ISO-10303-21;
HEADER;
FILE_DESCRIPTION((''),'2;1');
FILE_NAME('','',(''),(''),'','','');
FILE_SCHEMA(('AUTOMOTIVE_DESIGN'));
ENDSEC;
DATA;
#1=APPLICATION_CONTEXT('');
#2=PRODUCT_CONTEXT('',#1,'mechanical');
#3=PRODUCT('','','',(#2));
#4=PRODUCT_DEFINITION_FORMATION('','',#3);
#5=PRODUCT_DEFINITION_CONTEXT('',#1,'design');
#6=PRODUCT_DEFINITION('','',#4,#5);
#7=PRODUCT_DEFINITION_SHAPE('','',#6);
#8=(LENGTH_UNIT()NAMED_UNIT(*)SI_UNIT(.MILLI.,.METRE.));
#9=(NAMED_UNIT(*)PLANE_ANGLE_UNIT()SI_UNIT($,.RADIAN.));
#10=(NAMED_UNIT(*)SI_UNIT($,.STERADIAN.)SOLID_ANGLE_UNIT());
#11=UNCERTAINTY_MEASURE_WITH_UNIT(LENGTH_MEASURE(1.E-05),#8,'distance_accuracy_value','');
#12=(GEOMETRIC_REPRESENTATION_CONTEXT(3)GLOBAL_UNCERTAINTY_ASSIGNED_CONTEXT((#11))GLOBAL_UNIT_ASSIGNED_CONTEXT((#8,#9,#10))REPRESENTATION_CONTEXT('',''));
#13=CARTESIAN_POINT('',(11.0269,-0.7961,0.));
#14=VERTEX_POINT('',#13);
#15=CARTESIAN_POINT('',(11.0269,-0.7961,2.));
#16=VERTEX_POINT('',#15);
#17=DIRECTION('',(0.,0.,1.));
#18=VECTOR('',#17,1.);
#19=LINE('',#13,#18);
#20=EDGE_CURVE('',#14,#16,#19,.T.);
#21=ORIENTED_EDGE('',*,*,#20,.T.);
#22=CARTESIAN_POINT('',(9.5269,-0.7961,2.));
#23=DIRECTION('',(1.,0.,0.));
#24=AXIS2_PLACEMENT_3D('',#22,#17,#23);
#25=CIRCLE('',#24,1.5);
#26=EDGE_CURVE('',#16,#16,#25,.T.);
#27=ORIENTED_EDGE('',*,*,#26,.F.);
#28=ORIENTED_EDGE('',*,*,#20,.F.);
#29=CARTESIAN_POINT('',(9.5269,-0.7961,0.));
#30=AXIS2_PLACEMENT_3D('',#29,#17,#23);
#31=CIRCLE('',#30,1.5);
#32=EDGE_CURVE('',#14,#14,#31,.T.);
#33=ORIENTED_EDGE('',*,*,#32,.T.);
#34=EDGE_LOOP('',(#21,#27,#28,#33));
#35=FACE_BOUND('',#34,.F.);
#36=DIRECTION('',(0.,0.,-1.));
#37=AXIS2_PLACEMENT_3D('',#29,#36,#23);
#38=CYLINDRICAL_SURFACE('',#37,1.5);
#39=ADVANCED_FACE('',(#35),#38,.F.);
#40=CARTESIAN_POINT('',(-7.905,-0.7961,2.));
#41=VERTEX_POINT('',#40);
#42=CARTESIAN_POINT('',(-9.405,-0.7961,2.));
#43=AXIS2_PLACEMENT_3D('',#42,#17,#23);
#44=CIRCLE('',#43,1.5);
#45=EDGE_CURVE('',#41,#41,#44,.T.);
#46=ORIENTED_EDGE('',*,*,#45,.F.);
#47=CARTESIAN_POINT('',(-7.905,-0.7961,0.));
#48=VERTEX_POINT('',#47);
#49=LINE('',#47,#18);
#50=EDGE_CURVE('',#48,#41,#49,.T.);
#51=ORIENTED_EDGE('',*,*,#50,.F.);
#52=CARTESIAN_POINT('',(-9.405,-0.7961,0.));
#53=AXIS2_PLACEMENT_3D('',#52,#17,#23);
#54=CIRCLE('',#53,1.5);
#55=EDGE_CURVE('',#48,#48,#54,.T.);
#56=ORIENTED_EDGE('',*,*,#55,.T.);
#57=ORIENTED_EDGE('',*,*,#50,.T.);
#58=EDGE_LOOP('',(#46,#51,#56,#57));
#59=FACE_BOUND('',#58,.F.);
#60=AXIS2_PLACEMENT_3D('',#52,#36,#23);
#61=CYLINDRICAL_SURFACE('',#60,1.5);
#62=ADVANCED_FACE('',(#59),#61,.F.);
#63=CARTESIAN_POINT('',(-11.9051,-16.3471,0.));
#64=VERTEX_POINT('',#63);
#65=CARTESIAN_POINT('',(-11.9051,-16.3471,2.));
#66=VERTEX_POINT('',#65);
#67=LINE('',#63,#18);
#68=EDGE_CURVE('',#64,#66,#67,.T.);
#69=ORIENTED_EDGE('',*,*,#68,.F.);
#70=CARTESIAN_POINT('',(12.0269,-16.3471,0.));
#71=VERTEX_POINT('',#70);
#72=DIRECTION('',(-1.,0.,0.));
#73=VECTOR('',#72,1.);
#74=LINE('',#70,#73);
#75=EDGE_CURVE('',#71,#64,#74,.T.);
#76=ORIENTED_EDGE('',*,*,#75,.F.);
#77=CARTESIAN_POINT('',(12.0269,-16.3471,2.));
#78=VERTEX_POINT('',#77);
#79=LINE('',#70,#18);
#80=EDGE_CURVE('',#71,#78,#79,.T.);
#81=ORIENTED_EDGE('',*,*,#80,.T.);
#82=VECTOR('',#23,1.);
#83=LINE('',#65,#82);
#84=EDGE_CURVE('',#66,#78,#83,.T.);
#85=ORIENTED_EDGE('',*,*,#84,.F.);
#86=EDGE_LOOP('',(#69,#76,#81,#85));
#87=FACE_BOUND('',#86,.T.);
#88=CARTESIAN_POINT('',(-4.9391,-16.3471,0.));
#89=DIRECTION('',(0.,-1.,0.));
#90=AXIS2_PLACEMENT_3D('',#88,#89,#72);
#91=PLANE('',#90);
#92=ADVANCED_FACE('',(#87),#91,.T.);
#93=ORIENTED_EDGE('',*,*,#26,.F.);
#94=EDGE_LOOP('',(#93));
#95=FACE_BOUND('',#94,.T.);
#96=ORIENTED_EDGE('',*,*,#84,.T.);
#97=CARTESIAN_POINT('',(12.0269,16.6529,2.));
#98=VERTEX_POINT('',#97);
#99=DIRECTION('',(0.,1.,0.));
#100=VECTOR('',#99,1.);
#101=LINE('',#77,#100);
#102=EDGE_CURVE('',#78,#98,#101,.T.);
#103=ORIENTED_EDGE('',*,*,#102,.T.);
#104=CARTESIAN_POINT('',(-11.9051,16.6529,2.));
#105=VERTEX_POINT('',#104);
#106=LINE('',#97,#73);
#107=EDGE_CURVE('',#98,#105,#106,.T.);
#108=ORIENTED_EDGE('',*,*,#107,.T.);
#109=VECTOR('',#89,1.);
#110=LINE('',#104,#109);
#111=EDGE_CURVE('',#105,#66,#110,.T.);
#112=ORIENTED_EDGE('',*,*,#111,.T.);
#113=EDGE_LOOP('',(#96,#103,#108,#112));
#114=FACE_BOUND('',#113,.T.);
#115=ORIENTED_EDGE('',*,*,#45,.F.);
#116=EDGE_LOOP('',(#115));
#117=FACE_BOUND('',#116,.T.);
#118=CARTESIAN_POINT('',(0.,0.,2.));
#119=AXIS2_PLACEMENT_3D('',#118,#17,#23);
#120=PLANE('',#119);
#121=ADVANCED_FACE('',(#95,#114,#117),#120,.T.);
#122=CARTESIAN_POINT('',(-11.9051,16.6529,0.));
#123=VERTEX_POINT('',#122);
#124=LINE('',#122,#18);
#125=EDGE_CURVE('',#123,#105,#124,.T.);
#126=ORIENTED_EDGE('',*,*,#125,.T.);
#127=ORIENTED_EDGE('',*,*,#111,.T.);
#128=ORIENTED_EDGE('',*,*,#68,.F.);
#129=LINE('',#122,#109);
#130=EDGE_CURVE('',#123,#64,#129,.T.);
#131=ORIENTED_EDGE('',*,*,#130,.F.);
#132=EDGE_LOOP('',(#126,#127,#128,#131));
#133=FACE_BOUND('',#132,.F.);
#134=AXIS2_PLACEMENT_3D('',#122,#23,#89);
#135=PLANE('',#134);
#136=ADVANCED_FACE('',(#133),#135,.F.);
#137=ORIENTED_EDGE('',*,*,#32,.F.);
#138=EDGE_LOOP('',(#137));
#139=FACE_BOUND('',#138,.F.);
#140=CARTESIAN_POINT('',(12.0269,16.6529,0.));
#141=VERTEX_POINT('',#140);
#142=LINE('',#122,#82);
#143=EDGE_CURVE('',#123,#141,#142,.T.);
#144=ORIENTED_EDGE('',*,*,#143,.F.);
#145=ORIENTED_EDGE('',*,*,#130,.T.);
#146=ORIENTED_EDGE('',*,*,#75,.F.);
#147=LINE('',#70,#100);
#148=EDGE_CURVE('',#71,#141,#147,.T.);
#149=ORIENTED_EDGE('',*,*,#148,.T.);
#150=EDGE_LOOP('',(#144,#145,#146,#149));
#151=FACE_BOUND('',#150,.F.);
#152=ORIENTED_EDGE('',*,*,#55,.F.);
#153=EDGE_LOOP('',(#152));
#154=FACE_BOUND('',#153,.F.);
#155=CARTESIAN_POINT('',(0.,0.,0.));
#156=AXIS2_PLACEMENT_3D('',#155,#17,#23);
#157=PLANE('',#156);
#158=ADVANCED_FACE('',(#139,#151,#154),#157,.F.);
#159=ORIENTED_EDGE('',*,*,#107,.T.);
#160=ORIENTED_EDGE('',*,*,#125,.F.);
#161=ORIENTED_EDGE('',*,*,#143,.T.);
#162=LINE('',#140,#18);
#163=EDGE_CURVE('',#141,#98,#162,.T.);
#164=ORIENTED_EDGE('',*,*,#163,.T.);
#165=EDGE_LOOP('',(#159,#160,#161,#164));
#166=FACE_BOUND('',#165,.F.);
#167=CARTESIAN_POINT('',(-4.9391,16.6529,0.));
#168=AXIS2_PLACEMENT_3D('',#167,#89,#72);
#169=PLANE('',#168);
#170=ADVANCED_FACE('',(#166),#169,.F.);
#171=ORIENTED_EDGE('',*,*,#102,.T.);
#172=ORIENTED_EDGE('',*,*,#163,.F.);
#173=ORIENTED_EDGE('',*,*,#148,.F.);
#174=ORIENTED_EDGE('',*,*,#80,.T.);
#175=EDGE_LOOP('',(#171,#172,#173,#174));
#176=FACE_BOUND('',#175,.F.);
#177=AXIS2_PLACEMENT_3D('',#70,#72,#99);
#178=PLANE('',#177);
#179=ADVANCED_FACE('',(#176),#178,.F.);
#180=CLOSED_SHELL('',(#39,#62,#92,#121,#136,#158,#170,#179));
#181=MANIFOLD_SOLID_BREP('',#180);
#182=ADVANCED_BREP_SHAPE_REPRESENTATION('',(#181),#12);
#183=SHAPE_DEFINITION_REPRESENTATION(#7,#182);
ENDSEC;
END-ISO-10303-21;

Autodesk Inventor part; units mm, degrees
ref_plane "YZ Plane" through (0, 0, 0) normal (1, 0, 0) x (0, 1, 0)
ref_plane "XZ Plane" through (0, 0, 0) normal (0, 1, 0) x (-1, 0, 0)
ref_plane "XY Plane" through (0, 0, 0) normal (0, 0, 1) x (1, 0, 0)
sketch "草图1" plane through (0, 0, 0) normal (0, 0, 1) x (1, 0, 0)
  circle A0 centre (-9.405, -0.7961) radius 2 projected
  line L0 (-4.9391, -16.3471) -> (-4.9391, -13.3471) projected
  line L1 (-4.9391, -13.3471) -> (-6.4391, -13.3471) projected
  line L2 (-6.4391, -13.3471) -> (-6.4391, 13.6529) projected
  line L3 (-4.9391, 13.6529) -> (-6.4391, 13.6529) projected
  line L4 (-4.9391, 16.6529) -> (-4.9391, 13.6529) projected
  line L5 (-4.9391, 16.6529) -> (-11.9051, 16.6529) projected
  line L6 (-11.9051, 16.6529) -> (-11.9051, -16.3471) projected
  line L7 (-4.9391, -16.3471) -> (-11.9051, -16.3471) projected
  circle A1 centre (9.5269, -0.7961) radius 2 projected
  line L8 (5.0609, -16.3471) -> (12.0269, -16.3471) projected
  line L9 (12.0269, -16.3471) -> (12.0269, 16.6529) projected
  line L10 (5.0609, 16.6529) -> (12.0269, 16.6529) projected
  line L11 (5.0609, 16.6529) -> (5.0609, 13.6529) projected
  line L12 (6.5609, 13.6529) -> (5.0609, 13.6529) projected
  line L13 (6.5609, -13.3471) -> (6.5609, 13.6529) projected
  line L14 (6.5609, -13.3471) -> (5.0609, -13.3471) projected
  line L15 (5.0609, -13.3471) -> (5.0609, -16.3471) projected
  line L16 (12.0269, -16.3471) -> (-11.9051, -16.3471)
  line L17 (-11.9051, -16.3471) -> (-11.9051, 16.6529)
  line L18 (-11.9051, 16.6529) -> (12.0269, 16.6529)
  line L19 (12.0269, 16.6529) -> (12.0269, -16.3471)
  circle A2 centre (9.5269, -0.7961) radius 1.5
  circle A3 centre (-9.405, -0.7961) radius 1.5
  dimension "d2" = 0.5
  dimension "d3" = 0.5
extrude "拉伸1" add sketch "草图1" along normal blind 2 contours A0 | L7 L6 L5 L4 L3 L2 L1 L0 | L0 L1 L2 L3 L4 L18 L11 L12 L13 L14 L15 L16 | L15 L14 L13 L12 L11 L10 L9 L8 | A1
properties part number "触点外壳"
